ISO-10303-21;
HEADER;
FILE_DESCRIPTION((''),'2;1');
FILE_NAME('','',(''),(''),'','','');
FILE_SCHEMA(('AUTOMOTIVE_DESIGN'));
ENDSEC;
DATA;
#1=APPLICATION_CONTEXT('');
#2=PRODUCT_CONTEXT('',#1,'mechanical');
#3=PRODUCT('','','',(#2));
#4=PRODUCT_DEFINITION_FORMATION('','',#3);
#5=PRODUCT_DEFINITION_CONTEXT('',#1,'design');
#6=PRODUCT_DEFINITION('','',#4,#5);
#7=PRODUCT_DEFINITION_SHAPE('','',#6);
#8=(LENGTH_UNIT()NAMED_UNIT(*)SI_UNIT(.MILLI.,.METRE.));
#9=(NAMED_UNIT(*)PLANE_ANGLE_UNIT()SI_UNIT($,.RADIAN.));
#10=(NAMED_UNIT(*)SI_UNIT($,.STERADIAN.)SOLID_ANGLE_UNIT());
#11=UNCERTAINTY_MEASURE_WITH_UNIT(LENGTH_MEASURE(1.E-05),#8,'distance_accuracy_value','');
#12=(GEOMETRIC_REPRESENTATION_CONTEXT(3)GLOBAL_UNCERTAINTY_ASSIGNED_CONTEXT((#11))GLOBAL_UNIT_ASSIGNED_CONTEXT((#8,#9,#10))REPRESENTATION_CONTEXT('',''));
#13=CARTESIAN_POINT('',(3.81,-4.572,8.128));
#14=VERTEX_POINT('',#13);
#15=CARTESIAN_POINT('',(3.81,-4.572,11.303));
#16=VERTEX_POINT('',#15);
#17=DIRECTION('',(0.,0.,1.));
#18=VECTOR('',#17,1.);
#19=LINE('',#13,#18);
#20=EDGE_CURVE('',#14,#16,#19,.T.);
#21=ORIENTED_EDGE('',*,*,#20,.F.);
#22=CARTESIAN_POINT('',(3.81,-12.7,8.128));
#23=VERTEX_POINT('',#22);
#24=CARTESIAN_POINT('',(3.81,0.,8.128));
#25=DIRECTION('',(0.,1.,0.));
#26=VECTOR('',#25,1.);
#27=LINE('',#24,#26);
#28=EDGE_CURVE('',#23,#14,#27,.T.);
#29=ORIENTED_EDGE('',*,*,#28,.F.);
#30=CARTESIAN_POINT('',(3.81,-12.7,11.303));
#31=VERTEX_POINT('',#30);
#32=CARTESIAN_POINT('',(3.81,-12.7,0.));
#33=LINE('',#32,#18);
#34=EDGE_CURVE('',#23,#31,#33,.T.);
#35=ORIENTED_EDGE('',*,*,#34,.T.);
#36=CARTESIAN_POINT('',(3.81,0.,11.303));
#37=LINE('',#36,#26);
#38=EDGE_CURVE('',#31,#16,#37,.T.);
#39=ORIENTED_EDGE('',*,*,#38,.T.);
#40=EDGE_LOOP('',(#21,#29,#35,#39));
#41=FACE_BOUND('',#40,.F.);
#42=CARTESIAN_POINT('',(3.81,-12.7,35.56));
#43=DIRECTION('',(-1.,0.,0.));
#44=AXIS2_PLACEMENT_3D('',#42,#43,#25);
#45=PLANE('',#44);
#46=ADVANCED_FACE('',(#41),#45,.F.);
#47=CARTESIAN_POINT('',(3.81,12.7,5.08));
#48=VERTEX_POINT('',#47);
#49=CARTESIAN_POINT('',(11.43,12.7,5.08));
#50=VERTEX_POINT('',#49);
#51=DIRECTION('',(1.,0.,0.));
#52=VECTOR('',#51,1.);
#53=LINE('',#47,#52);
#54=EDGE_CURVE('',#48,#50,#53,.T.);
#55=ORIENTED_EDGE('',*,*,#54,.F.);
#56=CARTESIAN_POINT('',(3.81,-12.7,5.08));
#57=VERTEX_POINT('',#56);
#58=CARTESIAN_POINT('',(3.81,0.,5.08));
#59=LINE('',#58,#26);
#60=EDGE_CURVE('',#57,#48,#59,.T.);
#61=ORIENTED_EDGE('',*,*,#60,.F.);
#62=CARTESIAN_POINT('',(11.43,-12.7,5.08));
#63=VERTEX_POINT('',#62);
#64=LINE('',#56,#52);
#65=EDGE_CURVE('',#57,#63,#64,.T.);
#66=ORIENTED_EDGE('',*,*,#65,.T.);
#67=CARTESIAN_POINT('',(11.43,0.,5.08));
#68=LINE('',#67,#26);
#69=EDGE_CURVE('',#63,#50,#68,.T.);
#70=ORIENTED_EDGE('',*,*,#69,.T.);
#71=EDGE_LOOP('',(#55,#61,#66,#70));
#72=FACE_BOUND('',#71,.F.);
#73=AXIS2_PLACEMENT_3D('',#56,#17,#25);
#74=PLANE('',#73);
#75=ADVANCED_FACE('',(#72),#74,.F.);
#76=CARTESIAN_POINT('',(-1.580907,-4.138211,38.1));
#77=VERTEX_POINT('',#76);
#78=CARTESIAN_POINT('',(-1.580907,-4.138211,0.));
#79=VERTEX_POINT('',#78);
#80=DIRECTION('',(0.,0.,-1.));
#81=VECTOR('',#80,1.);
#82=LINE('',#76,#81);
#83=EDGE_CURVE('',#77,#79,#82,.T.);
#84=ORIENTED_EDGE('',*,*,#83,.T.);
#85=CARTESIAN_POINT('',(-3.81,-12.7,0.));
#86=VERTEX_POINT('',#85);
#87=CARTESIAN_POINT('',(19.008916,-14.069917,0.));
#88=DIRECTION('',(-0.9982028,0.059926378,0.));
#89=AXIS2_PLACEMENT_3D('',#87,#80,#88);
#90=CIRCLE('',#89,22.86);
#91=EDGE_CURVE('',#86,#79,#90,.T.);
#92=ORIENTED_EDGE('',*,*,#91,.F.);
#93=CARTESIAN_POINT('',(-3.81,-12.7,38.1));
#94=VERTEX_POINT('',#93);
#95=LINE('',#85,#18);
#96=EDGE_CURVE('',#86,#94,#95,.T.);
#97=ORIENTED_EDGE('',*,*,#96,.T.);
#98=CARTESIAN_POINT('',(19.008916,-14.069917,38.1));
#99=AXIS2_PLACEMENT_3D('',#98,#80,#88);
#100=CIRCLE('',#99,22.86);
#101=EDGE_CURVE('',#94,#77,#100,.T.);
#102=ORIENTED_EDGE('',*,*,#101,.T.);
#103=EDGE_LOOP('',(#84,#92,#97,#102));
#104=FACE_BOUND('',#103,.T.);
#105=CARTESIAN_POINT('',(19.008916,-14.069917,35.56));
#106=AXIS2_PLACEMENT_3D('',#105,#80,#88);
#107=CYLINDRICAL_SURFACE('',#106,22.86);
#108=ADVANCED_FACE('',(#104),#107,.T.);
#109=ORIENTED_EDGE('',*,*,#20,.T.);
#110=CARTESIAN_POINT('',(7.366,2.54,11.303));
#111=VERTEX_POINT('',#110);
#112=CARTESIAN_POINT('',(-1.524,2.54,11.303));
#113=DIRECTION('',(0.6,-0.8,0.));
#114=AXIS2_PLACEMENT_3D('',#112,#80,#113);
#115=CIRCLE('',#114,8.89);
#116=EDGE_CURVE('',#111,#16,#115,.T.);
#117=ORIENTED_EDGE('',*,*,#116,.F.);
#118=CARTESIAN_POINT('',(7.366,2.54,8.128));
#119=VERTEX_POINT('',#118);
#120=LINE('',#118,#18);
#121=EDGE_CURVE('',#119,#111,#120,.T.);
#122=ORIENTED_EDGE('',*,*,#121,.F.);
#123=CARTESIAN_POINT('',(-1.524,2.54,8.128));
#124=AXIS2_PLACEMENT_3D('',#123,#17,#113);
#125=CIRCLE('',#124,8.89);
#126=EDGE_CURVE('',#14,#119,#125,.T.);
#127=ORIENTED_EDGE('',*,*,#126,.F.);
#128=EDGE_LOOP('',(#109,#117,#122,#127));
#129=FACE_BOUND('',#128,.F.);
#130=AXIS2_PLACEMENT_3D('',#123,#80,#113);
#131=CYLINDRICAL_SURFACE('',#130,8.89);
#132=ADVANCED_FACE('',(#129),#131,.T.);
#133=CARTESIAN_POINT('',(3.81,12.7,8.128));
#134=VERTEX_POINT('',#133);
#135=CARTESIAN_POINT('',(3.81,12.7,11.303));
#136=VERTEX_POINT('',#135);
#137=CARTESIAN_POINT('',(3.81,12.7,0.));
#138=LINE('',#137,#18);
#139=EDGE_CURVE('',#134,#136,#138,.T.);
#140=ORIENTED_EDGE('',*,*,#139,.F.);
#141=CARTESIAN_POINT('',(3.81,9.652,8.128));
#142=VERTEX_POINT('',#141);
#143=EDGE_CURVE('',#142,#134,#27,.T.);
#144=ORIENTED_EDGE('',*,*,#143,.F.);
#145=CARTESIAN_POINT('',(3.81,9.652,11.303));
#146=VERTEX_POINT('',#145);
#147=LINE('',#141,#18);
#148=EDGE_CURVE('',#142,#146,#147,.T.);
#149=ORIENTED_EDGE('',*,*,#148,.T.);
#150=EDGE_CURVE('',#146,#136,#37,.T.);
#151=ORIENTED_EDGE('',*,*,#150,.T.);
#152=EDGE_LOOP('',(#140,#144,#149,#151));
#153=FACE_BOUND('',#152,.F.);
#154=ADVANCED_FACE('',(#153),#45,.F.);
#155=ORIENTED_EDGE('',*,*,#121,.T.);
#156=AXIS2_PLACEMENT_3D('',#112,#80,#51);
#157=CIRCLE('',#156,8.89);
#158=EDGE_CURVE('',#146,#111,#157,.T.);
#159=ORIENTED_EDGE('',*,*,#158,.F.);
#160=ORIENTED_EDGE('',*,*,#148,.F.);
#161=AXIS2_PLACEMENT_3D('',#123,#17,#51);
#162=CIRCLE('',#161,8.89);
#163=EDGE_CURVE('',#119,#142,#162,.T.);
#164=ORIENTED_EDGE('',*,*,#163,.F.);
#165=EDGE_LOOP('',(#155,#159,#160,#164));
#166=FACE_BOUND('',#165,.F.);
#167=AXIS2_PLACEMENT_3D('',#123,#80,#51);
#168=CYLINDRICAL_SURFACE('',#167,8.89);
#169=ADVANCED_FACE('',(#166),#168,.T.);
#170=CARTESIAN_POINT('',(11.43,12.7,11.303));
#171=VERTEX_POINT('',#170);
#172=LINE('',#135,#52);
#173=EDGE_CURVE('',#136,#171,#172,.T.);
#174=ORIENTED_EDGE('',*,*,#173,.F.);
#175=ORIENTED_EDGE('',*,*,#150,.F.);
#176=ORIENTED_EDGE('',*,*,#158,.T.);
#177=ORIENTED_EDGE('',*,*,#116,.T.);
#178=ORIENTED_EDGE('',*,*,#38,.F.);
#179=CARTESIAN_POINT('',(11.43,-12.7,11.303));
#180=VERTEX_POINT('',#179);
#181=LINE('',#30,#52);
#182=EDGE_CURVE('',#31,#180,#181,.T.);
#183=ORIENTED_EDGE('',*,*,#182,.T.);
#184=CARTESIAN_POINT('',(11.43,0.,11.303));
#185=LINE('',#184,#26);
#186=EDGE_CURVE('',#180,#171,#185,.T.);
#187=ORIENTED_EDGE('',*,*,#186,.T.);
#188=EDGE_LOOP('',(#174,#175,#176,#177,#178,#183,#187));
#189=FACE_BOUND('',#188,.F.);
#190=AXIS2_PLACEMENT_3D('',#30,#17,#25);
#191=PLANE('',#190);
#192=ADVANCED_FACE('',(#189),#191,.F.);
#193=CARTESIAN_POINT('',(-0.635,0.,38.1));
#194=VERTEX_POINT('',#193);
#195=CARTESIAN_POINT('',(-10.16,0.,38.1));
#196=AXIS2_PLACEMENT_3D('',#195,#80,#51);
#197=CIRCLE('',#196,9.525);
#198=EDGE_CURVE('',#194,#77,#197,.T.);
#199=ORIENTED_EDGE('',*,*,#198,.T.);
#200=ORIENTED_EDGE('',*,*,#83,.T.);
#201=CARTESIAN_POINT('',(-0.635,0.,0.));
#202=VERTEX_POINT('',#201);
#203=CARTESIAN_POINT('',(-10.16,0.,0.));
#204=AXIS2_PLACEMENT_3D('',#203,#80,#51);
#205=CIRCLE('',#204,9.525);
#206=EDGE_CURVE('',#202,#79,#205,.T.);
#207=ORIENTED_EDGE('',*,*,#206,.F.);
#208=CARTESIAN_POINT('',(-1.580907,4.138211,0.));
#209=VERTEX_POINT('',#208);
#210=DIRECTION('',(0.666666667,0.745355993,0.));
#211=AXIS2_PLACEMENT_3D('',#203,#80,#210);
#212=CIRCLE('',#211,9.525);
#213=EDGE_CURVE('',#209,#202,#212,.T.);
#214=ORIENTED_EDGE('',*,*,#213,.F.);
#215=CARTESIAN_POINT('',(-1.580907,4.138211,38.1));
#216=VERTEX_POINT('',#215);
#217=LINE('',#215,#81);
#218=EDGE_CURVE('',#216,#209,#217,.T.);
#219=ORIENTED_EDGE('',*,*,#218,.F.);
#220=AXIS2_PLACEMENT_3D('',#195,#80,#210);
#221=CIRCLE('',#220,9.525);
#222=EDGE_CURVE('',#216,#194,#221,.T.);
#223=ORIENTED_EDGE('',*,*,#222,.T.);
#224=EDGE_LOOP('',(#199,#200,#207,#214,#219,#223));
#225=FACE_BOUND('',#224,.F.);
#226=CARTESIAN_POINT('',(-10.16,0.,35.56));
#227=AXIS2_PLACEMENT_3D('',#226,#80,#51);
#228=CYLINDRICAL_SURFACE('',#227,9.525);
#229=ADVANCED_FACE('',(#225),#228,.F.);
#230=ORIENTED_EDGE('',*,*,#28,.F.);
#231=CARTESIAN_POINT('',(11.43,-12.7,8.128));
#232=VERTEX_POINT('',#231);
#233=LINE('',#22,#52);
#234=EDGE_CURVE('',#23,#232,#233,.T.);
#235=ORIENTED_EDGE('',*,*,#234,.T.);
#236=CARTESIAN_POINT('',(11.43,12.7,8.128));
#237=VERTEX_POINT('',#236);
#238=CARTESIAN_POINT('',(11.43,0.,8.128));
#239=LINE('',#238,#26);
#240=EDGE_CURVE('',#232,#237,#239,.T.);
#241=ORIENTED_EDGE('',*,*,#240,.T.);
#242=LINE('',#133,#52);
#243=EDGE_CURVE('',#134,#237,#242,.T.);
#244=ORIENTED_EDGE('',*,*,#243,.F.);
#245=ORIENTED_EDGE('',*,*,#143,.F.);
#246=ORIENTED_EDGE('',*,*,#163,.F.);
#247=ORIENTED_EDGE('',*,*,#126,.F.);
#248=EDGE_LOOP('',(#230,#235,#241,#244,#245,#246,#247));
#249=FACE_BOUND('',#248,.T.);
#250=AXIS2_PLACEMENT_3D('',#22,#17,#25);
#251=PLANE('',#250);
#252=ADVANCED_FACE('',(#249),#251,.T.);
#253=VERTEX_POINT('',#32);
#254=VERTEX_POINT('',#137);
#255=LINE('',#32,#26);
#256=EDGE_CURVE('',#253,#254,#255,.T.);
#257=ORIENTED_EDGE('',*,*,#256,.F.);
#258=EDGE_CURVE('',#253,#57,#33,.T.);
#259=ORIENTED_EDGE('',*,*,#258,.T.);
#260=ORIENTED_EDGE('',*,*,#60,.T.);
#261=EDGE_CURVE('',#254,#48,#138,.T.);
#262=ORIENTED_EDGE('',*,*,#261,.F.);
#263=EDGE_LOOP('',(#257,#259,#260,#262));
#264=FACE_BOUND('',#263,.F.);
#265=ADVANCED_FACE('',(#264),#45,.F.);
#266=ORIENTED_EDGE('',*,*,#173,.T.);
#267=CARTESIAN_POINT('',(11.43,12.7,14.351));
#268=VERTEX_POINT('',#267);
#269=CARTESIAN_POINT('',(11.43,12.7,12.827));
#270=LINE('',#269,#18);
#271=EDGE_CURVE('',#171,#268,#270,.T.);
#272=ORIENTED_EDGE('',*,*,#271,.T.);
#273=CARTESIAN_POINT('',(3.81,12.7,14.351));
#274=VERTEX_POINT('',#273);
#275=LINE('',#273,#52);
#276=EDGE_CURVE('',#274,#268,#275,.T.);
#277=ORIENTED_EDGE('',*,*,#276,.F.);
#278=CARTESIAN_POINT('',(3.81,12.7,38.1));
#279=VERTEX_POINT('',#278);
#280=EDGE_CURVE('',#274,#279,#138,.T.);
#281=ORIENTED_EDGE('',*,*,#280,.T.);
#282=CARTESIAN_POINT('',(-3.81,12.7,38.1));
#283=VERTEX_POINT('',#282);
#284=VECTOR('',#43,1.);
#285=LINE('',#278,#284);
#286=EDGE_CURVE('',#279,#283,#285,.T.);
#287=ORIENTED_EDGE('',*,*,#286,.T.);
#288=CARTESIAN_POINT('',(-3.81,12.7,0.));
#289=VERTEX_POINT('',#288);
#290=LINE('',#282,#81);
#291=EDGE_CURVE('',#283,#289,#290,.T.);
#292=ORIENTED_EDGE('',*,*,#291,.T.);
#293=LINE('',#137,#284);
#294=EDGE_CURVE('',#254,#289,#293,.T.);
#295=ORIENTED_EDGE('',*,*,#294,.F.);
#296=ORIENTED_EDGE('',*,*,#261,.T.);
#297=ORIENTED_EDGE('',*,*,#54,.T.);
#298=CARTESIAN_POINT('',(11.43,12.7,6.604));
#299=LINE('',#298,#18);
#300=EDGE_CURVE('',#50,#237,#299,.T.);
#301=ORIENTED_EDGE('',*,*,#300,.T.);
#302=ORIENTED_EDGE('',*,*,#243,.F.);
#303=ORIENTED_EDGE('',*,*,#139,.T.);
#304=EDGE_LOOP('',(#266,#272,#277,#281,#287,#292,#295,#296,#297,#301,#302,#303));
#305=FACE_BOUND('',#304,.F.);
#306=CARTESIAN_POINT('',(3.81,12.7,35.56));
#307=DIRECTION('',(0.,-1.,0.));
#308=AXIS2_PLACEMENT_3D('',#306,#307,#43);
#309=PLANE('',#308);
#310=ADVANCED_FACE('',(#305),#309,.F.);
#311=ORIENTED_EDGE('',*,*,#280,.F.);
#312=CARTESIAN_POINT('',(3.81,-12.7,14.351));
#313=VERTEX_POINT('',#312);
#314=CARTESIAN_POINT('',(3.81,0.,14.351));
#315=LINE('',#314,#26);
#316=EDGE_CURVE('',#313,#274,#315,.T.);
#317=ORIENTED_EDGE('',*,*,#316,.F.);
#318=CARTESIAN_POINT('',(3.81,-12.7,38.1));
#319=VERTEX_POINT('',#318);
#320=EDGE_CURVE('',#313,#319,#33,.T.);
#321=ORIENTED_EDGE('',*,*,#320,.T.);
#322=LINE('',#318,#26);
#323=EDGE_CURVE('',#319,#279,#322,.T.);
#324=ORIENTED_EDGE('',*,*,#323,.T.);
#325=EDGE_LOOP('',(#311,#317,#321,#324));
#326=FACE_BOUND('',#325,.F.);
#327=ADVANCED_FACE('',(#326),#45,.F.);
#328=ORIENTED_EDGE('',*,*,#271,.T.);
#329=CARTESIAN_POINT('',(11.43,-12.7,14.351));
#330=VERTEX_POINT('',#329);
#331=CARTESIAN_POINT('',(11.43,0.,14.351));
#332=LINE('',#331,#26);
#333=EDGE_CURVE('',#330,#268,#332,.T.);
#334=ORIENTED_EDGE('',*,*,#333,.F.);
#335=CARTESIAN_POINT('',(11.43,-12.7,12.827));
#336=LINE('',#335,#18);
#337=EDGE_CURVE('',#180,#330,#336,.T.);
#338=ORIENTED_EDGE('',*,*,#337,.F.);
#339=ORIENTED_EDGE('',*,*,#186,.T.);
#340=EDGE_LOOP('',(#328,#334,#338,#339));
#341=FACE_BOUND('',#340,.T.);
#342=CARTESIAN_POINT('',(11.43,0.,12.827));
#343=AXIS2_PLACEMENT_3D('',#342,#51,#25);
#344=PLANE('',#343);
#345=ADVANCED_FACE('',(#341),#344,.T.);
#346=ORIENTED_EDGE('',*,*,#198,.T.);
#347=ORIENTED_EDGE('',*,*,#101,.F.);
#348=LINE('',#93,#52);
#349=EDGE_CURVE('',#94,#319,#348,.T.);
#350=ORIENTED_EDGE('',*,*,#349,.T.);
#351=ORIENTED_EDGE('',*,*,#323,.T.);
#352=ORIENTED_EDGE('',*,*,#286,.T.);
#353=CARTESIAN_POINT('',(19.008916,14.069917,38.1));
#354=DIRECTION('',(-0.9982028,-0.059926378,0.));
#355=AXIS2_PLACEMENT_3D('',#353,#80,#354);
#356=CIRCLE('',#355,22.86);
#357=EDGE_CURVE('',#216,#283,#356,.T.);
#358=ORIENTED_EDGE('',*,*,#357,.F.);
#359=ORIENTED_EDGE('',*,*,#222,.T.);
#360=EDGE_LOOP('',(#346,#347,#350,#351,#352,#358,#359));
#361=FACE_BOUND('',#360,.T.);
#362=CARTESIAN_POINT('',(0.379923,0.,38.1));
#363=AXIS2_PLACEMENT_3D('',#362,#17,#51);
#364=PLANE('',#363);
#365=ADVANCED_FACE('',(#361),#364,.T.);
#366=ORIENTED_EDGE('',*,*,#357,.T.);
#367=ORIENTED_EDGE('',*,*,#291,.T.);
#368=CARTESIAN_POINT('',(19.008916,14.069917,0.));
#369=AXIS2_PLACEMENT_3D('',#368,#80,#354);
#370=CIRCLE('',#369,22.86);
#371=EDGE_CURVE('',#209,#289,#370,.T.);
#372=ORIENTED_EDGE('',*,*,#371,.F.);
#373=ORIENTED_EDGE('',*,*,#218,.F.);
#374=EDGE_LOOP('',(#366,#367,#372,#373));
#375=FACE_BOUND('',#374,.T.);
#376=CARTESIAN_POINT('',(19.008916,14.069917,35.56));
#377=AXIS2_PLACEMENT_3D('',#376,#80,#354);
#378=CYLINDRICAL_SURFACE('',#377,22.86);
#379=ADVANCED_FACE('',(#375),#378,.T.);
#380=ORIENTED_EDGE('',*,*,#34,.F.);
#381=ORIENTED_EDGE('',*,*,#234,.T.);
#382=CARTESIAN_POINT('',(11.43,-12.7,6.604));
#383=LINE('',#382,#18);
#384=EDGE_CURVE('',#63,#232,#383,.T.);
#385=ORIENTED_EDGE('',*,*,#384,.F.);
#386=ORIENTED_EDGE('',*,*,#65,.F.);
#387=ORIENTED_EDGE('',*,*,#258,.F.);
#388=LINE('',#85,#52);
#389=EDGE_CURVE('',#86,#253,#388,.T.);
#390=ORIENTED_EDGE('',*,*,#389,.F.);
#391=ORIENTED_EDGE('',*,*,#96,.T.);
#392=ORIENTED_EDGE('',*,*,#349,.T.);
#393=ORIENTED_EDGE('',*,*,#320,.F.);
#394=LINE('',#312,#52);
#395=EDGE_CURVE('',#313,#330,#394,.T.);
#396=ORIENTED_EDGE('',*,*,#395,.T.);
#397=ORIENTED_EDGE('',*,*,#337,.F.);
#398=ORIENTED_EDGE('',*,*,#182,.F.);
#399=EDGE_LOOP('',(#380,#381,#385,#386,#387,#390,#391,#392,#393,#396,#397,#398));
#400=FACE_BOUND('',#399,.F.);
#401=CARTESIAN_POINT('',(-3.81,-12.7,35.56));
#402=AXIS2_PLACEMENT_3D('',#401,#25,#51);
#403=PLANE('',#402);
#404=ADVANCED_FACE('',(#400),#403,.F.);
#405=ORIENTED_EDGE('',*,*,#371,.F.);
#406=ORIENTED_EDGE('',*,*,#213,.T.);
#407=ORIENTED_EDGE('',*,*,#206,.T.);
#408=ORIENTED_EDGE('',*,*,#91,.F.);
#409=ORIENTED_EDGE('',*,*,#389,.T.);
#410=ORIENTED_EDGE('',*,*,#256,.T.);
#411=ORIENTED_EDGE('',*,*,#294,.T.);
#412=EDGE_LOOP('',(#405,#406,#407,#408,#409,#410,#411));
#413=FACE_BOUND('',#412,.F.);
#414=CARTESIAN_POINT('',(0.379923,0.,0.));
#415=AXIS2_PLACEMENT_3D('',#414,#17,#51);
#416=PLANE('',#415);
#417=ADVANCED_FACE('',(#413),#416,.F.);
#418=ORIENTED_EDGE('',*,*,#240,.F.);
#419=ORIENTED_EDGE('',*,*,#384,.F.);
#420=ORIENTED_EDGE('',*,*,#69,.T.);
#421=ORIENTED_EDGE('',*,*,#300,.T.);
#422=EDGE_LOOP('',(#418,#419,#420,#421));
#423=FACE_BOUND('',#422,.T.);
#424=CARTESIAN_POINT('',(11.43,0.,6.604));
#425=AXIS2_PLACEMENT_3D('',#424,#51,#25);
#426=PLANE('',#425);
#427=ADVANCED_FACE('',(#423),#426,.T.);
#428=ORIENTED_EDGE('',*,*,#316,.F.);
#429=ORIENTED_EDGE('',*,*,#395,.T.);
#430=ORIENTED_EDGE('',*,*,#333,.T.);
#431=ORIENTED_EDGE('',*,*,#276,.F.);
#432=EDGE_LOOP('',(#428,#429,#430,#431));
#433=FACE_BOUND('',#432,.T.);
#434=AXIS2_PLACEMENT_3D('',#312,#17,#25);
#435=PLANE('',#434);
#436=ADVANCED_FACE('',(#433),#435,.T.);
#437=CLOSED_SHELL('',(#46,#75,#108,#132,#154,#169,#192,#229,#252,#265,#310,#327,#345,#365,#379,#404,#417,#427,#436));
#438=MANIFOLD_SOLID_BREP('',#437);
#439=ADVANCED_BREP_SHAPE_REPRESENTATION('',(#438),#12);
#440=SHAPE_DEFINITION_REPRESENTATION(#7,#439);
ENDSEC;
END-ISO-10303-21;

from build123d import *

# Parameters (mm, degrees)
F1_DEPTH    = 25.4
F2_T1_DEPTH = 53.4024208572
F3_DEPTH    = 10.16
F4_DEPTH    = 2.54
F5_W        = 25.4
F5_H        = 3.048
F6_DEPTH    = 7.62
F8_DEPTH    = 5.08


# Not quite as in the source:
# - a fillet or chamfer that OpenCascade refuses, or shapes differently, is made with other operations: its cross-section is extruded or revolved along the edge and cut away or added


with BuildPart() as f1:
    # F0 (on Top) → F1 (new body)
    with BuildSketch(Plane.XY):
        with BuildLine():
            Line((-3.81, -12.7), (3.81, -12.7))
            Line((3.81, -12.7), (3.81, 12.7))
            Line((3.81, 12.7), (-3.81, 12.7))
            Line((-3.81, 12.7), (-3.81, 7.0995158286))
            ThreePointArc((-3.81, 7.0995158286), (-1.4649043996, 3.8885649667), (-0.635, 0))
            ThreePointArc((-0.635, 0), (-1.4649043996, -3.8885649667), (-3.81, -7.0995158286))
            Line((-3.81, -7.0995158286), (-3.81, -12.7))
        make_face()
    extrude(amount=F1_DEPTH)

    # F2: fillet of radius 22.86 on 2 edges, made by hand

    # F2_s2 → F2_t1 (cut)
    with BuildSketch(Plane.XY.offset(-14.0012104286)):
        with BuildLine():
            ThreePointArc((-3.81, 12.7), (-3.1136000163, 8.3102394823), (-1.5809070588, 4.1382108824))
            ThreePointArc((-1.5809070588, 4.1382108824), (-2.5500206467, 5.7283365162), (-3.81, 7.0995158286))
            Line((-3.81, 7.0995158286), (-3.81, 12.7))
        make_face()
        with BuildLine():
            ThreePointArc((-3.81, -12.7), (-3.1136000163, -8.3102394823), (-1.5809070588, -4.1382108824))
            ThreePointArc((-1.5809070588, -4.1382108824), (-2.5500206467, -5.7283365162), (-3.81, -7.0995158286))
            Line((-3.81, -7.0995158286), (-3.81, -12.7))
        make_face()
    extrude(amount=F2_T1_DEPTH, mode=Mode.SUBTRACT)

    # F3 (add): a face of the model
    f3_faces = [f1.faces().sort_by_distance(p)[0] for p in [
        (0.6414875327, 0, 25.4),
    ]]
    extrude(f3_faces, amount=F3_DEPTH)

    # F4 (add): a face of the model
    f4_faces = [f1.faces().sort_by_distance(p)[0] for p in [
        (0.6414875327, 0, 35.56),
    ]]
    extrude(f4_faces, amount=F4_DEPTH)

    # F5 (on face) → F6 (join)
    with BuildSketch(Plane.YZ.offset(3.81)):
        with Locations((0, 12.827)):
            Rectangle(F5_W, F5_H)
        with Locations((0, 6.604)):
            Rectangle(F5_W, F5_H)
    extrude(amount=F6_DEPTH)

    # F7 (on face) → F8 (join)
    with BuildSketch(Plane.XY.offset(8.128)):
        with BuildLine():
            ThreePointArc((3.81, -4.572), (6.427457728, -1.435728864), (7.366, 2.54))
            ThreePointArc((7.366, 2.54), (6.427457728, 6.515728864), (3.81, 9.652))
            Line((3.81, 9.652), (3.81, -4.572))
        make_face()
    extrude(amount=F8_DEPTH)


solid = f1.part
